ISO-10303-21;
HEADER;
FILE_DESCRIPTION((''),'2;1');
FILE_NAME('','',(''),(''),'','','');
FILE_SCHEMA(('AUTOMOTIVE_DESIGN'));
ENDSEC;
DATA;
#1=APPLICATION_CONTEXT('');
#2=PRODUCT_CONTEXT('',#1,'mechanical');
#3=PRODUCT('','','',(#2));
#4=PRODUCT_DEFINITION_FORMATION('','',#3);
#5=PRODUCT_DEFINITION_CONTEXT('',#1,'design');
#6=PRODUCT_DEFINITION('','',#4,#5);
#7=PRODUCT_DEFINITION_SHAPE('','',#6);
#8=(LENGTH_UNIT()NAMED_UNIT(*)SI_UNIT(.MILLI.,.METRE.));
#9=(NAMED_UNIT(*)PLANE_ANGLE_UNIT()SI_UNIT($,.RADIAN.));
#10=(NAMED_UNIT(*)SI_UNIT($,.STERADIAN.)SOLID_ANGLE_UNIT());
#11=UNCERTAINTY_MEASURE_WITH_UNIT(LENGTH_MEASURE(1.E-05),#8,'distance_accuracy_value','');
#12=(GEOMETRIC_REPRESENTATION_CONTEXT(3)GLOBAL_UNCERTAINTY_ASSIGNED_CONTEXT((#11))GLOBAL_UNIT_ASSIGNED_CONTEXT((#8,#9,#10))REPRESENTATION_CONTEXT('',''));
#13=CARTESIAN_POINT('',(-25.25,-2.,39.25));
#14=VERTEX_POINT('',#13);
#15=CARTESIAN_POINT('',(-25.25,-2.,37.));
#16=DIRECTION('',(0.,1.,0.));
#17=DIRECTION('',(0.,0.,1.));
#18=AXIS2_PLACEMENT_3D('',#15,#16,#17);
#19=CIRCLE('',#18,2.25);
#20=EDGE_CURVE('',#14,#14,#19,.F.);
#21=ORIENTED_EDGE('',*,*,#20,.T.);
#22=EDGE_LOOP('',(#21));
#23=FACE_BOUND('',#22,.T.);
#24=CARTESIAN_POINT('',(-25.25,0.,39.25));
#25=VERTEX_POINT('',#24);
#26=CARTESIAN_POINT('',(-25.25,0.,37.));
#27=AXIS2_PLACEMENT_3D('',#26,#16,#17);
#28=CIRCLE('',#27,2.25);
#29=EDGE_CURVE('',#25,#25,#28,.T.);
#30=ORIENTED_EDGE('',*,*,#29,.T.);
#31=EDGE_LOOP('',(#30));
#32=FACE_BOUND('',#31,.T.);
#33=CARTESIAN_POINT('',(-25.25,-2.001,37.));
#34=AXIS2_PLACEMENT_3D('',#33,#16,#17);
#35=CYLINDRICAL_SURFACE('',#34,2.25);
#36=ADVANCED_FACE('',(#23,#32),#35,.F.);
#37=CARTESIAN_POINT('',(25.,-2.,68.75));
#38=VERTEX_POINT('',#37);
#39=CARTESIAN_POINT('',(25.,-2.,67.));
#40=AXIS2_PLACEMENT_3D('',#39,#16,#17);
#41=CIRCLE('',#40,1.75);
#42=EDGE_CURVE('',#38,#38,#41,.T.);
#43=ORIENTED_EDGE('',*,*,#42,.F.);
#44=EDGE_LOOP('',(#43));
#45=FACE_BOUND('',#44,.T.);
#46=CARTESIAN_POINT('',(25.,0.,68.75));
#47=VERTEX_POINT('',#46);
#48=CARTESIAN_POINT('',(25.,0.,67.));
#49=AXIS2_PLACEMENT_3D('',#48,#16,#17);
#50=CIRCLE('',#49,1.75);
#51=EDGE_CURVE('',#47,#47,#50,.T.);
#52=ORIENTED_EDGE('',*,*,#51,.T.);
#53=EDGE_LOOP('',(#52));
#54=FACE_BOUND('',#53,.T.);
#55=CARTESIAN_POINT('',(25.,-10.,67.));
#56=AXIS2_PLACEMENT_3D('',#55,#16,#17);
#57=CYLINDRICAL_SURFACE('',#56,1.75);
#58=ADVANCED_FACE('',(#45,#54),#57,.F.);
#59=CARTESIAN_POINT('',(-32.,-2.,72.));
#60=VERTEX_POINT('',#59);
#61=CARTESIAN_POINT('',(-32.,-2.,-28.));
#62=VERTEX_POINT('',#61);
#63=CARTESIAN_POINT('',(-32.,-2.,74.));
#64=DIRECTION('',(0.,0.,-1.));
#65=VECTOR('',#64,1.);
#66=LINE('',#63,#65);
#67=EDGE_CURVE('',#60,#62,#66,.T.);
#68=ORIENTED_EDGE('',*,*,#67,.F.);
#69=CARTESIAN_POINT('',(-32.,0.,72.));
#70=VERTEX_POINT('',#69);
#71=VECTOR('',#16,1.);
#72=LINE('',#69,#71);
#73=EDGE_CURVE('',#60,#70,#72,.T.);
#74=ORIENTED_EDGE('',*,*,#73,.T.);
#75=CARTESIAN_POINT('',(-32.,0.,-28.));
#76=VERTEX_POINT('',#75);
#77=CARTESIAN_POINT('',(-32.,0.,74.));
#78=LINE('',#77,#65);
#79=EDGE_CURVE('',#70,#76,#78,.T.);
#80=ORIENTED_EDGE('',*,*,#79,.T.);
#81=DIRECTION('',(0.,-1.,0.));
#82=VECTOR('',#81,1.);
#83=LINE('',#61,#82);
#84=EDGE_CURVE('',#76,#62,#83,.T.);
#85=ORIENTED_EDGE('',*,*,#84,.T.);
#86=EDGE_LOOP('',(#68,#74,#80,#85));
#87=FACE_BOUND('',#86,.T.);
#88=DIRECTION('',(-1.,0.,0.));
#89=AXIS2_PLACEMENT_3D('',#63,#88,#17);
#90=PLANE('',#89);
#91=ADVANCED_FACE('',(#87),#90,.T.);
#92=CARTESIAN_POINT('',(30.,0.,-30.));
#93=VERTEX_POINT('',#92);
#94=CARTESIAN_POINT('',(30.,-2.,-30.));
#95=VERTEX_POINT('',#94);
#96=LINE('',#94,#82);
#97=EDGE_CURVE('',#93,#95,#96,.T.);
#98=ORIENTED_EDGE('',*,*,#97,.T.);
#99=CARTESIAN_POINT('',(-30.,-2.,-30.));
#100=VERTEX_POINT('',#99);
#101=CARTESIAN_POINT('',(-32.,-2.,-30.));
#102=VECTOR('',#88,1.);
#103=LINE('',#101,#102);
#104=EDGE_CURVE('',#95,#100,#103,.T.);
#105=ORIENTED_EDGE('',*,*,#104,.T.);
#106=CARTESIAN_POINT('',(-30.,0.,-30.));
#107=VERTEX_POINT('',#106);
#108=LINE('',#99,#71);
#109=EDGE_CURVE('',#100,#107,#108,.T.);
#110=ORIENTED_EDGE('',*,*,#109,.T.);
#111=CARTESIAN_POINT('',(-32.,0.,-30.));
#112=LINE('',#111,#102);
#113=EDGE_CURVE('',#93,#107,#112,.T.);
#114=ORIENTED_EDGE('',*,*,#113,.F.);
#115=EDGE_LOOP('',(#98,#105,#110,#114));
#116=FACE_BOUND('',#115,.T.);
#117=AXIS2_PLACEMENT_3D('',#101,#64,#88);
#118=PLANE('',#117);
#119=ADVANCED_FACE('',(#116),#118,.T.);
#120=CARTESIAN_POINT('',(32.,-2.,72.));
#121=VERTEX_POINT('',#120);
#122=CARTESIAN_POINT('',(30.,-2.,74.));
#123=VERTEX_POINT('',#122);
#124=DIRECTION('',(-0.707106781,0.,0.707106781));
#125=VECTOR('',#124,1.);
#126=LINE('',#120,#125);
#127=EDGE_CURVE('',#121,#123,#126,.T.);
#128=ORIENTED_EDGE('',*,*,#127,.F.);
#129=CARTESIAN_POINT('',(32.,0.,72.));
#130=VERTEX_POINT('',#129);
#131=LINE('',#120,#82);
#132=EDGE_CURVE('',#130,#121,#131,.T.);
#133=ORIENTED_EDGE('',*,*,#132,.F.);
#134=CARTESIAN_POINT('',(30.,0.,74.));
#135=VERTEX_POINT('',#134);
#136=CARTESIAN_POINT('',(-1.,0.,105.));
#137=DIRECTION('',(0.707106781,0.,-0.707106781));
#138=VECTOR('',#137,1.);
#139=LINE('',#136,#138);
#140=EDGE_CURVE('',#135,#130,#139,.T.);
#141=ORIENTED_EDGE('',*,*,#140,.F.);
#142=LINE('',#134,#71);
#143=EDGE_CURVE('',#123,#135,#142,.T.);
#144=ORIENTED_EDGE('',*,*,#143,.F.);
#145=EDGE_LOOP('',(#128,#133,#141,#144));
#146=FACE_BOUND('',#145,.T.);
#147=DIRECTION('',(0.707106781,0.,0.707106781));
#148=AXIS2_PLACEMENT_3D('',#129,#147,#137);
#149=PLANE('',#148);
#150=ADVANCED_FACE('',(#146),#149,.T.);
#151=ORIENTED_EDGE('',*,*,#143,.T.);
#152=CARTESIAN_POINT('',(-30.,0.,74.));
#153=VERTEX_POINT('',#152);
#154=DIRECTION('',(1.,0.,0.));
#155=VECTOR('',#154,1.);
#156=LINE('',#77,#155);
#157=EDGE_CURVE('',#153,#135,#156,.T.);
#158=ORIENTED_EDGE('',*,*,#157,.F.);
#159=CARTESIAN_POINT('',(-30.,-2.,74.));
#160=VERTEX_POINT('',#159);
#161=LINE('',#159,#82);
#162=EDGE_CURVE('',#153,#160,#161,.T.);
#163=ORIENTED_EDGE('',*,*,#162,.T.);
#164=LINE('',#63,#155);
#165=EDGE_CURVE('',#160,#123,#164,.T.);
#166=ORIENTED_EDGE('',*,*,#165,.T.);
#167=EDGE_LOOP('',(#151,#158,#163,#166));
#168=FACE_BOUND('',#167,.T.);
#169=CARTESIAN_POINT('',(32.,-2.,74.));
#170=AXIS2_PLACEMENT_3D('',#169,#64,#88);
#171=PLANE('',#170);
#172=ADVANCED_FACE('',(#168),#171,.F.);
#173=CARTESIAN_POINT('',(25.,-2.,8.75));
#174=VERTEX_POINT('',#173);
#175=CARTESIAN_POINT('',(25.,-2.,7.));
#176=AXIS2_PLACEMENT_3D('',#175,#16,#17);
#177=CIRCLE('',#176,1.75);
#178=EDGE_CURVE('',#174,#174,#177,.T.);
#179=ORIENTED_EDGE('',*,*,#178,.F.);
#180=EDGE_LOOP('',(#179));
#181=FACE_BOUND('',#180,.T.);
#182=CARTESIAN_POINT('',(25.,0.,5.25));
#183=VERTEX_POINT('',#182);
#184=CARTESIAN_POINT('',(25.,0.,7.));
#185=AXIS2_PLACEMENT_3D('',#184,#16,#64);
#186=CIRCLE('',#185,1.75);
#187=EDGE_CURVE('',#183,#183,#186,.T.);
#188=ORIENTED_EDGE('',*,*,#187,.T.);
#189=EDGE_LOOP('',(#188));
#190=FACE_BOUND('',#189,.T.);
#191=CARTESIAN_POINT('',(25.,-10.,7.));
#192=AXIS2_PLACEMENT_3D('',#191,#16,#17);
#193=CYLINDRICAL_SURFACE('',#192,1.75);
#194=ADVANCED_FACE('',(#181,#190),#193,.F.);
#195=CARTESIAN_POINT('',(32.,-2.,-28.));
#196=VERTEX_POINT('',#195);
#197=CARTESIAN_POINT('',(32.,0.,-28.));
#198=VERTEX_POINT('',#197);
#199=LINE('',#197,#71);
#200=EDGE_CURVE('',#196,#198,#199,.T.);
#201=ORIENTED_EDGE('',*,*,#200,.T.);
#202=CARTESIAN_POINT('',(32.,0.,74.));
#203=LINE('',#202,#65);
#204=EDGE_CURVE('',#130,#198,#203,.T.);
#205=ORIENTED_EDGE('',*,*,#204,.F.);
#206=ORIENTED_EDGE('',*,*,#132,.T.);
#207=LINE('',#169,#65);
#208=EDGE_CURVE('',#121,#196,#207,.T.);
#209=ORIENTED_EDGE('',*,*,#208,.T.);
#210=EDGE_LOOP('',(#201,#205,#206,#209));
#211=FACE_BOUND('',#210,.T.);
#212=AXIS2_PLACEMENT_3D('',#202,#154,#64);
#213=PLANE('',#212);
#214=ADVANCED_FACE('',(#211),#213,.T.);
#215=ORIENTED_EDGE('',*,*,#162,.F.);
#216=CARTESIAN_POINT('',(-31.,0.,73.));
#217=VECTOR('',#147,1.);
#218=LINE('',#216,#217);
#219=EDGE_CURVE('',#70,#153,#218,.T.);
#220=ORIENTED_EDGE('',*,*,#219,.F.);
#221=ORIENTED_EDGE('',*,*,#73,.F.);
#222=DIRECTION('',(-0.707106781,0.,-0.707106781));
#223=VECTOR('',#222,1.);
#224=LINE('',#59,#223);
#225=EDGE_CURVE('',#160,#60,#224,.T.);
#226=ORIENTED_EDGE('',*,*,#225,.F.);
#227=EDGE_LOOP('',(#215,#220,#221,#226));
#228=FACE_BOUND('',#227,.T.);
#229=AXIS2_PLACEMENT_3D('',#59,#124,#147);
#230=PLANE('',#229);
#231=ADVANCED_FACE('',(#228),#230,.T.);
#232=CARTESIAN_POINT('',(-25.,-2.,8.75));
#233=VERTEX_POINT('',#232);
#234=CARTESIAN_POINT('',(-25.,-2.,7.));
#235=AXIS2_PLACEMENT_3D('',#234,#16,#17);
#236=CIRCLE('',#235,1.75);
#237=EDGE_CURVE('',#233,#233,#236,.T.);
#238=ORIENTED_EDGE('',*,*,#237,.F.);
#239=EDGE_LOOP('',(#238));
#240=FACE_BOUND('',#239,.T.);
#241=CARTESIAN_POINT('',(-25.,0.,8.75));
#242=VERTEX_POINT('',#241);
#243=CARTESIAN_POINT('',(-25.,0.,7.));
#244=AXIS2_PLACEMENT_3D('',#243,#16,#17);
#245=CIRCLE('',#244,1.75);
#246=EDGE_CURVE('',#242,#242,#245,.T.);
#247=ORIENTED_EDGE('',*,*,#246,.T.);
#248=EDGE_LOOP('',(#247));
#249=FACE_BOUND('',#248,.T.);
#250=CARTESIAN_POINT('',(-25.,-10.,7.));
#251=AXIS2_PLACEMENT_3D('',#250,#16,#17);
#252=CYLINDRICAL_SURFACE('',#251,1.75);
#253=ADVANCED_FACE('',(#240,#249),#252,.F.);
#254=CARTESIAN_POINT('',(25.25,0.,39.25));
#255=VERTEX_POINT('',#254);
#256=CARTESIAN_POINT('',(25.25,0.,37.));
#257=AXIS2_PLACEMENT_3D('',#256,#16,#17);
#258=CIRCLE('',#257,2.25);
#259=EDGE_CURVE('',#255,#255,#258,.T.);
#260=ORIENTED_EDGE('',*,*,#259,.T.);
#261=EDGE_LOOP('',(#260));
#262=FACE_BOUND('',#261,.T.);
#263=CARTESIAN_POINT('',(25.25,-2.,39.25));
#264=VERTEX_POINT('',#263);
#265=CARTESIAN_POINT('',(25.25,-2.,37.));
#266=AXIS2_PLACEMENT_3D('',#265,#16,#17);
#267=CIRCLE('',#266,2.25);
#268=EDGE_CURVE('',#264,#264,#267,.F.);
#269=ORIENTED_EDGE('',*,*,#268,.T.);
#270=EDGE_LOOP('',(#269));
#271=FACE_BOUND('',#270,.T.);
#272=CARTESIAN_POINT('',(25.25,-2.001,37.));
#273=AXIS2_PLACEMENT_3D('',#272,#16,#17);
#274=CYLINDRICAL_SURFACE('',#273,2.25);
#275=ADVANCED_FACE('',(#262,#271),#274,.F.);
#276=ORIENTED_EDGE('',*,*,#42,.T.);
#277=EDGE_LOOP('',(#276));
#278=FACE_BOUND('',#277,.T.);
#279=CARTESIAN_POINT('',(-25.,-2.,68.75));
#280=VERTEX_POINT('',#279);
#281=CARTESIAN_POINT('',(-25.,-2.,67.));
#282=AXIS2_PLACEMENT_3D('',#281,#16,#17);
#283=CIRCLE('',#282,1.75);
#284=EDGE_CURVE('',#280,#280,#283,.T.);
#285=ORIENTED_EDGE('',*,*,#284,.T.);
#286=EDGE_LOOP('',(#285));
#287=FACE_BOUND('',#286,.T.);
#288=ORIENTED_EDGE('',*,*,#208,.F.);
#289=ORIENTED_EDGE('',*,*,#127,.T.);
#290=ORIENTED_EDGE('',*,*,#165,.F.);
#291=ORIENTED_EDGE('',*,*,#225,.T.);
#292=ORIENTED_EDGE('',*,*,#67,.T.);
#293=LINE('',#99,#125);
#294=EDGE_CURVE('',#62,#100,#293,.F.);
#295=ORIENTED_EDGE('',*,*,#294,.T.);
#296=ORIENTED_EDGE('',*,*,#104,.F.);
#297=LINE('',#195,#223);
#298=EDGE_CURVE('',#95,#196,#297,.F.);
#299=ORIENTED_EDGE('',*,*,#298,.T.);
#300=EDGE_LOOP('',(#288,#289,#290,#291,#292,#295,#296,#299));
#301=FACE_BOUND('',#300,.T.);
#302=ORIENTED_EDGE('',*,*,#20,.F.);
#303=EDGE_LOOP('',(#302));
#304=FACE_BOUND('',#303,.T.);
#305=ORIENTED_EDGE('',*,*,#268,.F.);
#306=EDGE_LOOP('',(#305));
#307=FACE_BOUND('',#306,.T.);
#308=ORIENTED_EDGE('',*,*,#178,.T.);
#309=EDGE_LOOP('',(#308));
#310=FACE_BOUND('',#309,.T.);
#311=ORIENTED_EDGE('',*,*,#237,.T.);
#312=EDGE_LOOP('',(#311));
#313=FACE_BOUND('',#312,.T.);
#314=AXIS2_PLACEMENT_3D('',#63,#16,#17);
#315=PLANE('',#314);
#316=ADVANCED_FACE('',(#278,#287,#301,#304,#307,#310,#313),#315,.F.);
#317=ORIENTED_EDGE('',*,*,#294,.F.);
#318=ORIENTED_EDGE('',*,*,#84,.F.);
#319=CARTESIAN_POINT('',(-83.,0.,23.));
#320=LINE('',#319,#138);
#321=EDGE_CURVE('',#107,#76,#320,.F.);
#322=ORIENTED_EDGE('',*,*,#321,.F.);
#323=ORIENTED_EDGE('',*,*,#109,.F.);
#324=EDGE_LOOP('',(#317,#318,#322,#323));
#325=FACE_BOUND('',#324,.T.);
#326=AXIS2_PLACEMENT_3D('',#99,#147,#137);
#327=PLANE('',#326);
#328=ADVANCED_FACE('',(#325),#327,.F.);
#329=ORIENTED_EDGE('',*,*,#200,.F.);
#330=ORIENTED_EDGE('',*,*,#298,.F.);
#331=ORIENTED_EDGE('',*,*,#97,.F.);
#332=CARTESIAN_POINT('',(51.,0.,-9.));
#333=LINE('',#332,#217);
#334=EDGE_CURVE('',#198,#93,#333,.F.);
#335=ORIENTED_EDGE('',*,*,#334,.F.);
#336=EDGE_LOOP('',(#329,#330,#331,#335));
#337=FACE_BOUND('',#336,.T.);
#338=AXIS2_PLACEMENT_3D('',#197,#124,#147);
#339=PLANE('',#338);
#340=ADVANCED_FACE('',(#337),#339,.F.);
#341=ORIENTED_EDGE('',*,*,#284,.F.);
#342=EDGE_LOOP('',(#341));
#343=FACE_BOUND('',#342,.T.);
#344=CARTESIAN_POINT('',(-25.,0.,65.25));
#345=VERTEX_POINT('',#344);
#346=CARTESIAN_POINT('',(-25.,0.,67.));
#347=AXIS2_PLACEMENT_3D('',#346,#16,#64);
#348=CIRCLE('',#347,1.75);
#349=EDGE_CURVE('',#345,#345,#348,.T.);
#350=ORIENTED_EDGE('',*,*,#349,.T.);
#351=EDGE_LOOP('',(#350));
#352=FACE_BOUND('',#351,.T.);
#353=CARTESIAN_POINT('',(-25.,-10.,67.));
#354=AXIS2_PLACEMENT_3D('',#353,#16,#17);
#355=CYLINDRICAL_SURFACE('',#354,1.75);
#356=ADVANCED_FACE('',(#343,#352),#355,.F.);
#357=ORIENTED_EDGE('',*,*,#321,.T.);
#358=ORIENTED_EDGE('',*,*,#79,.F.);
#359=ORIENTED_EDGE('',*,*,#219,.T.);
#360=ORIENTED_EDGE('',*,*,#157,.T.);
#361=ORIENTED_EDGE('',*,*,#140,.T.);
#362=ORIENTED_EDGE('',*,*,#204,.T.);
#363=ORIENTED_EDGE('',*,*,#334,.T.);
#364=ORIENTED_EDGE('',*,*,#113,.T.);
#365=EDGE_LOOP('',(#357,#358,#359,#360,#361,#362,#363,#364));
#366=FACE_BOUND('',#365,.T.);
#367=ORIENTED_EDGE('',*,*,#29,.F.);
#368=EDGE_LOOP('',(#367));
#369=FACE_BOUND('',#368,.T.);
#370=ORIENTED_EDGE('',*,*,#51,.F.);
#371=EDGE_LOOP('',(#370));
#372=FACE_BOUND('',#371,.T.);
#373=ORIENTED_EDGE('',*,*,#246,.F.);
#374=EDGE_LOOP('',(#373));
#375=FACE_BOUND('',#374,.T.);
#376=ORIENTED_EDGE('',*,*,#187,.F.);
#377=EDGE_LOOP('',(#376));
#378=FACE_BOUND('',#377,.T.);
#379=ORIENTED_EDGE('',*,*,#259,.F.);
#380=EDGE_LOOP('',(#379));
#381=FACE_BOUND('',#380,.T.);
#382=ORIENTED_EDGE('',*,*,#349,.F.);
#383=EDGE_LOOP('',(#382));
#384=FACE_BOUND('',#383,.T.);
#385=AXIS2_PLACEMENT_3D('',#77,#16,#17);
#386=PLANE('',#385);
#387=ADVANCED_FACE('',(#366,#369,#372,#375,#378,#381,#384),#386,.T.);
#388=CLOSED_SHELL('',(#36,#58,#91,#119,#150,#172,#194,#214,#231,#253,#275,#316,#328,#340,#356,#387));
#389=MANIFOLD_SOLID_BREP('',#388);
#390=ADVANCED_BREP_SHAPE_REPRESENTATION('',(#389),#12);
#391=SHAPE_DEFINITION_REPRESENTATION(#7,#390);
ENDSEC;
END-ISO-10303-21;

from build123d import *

# Parameters (mm, degrees)
SKETCH1_W          = 64
SKETCH1_H          = 2
BASE_FLANGE1_DEPTH = 74
SKETCH2_R          = 1.75
CUT_EXTRUDE1_DEPTH = 10
CHAMFER1_SIZE      = 2
SKETCH8_W          = 64
SKETCH8_H          = 30
TAB1_DEPTH         = 2
CHAMFER2_SIZE      = 2
CUT_EXTRUDE2_REACH = 82.647
SKETCH9_R          = 2.25


# Sheet-metal steps are written as plain solids
with BuildPart() as part:
    # Sketch1 → Base-Flange1 (new body)
    with BuildSketch(Plane.XY):
        with Locations((0, -1)):
            Rectangle(SKETCH1_W, SKETCH1_H)
    extrude(amount=BASE_FLANGE1_DEPTH)

    # Sketch2 → Cut-Extrude1 (cut)
    with BuildSketch(Plane(origin=(0, 0, 0), x_dir=(1, 0, 0), z_dir=(0, 1, 0))):
        with Locations(Location((-25, -7, 0), (0, 0, 270))):
            Circle(SKETCH2_R)
        with Locations(Location((-25, -67, 0), (0, 0, 270))):
            Circle(SKETCH2_R)
        with Locations(Location((25, -67, 0), (0, 0, 270))):
            Circle(SKETCH2_R)
        with Locations(Location((25, -7, 0), (0, 0, 270))):
            Circle(SKETCH2_R)
    extrude(amount=-CUT_EXTRUDE1_DEPTH, mode=Mode.SUBTRACT)

    # Chamfer1
    chamfer1_edges = [part.edges().sort_by_distance(p)[0] for p in [
        (-32, -1, 74),
        (32, -1, 74),
    ]]
    chamfer(chamfer1_edges, length=CHAMFER1_SIZE)

    # Sketch8 → Tab1 (add)
    with BuildSketch(Plane(origin=(0, 0, 0), x_dir=(1, 0, 0), z_dir=(0, 1, 0))):
        with Locations((0, 15)):
            Rectangle(SKETCH8_W, SKETCH8_H)
    extrude(amount=-TAB1_DEPTH)

    # Chamfer2
    chamfer2_edges = [part.edges().sort_by_distance(p)[0] for p in [
        (-32, -1, -30),
        (32, -1, -30),
    ]]
    chamfer(chamfer2_edges, length=CHAMFER2_SIZE)

    # Sketch9 → Cut-Extrude2 (cut, up to next)
    with BuildSketch(Plane(origin=(0, 0, 0), x_dir=(1, 0, 0), z_dir=(0, 1, 0)), mode=Mode.PRIVATE) as cut_extrude2_sk1:
        with Locations(Location((-25.25, -37, 0), (0, 0, 270))):
            Circle(SKETCH9_R)
    cut_extrude2_tool1 = extrude(cut_extrude2_sk1.sketch, amount=-CUT_EXTRUDE2_REACH, mode=Mode.PRIVATE) & part.part
    # Sketch9 → Cut-Extrude2 (cut, up to next)
    with BuildSketch(Plane(origin=(0, 0, 0), x_dir=(1, 0, 0), z_dir=(0, 1, 0)), mode=Mode.PRIVATE) as cut_extrude2_sk2:
        with Locations(Location((25.25, -37, 0), (0, 0, 270))):
            Circle(SKETCH9_R)
    cut_extrude2_tool2 = extrude(cut_extrude2_sk2.sketch, amount=-CUT_EXTRUDE2_REACH, mode=Mode.PRIVATE) & part.part
    add(cut_extrude2_tool1.solids().sort_by_distance((-25.25, 0, 37))[0], mode=Mode.SUBTRACT)
    add(cut_extrude2_tool2.solids().sort_by_distance((25.25, 0, 37))[0], mode=Mode.SUBTRACT)


solid = part.part
